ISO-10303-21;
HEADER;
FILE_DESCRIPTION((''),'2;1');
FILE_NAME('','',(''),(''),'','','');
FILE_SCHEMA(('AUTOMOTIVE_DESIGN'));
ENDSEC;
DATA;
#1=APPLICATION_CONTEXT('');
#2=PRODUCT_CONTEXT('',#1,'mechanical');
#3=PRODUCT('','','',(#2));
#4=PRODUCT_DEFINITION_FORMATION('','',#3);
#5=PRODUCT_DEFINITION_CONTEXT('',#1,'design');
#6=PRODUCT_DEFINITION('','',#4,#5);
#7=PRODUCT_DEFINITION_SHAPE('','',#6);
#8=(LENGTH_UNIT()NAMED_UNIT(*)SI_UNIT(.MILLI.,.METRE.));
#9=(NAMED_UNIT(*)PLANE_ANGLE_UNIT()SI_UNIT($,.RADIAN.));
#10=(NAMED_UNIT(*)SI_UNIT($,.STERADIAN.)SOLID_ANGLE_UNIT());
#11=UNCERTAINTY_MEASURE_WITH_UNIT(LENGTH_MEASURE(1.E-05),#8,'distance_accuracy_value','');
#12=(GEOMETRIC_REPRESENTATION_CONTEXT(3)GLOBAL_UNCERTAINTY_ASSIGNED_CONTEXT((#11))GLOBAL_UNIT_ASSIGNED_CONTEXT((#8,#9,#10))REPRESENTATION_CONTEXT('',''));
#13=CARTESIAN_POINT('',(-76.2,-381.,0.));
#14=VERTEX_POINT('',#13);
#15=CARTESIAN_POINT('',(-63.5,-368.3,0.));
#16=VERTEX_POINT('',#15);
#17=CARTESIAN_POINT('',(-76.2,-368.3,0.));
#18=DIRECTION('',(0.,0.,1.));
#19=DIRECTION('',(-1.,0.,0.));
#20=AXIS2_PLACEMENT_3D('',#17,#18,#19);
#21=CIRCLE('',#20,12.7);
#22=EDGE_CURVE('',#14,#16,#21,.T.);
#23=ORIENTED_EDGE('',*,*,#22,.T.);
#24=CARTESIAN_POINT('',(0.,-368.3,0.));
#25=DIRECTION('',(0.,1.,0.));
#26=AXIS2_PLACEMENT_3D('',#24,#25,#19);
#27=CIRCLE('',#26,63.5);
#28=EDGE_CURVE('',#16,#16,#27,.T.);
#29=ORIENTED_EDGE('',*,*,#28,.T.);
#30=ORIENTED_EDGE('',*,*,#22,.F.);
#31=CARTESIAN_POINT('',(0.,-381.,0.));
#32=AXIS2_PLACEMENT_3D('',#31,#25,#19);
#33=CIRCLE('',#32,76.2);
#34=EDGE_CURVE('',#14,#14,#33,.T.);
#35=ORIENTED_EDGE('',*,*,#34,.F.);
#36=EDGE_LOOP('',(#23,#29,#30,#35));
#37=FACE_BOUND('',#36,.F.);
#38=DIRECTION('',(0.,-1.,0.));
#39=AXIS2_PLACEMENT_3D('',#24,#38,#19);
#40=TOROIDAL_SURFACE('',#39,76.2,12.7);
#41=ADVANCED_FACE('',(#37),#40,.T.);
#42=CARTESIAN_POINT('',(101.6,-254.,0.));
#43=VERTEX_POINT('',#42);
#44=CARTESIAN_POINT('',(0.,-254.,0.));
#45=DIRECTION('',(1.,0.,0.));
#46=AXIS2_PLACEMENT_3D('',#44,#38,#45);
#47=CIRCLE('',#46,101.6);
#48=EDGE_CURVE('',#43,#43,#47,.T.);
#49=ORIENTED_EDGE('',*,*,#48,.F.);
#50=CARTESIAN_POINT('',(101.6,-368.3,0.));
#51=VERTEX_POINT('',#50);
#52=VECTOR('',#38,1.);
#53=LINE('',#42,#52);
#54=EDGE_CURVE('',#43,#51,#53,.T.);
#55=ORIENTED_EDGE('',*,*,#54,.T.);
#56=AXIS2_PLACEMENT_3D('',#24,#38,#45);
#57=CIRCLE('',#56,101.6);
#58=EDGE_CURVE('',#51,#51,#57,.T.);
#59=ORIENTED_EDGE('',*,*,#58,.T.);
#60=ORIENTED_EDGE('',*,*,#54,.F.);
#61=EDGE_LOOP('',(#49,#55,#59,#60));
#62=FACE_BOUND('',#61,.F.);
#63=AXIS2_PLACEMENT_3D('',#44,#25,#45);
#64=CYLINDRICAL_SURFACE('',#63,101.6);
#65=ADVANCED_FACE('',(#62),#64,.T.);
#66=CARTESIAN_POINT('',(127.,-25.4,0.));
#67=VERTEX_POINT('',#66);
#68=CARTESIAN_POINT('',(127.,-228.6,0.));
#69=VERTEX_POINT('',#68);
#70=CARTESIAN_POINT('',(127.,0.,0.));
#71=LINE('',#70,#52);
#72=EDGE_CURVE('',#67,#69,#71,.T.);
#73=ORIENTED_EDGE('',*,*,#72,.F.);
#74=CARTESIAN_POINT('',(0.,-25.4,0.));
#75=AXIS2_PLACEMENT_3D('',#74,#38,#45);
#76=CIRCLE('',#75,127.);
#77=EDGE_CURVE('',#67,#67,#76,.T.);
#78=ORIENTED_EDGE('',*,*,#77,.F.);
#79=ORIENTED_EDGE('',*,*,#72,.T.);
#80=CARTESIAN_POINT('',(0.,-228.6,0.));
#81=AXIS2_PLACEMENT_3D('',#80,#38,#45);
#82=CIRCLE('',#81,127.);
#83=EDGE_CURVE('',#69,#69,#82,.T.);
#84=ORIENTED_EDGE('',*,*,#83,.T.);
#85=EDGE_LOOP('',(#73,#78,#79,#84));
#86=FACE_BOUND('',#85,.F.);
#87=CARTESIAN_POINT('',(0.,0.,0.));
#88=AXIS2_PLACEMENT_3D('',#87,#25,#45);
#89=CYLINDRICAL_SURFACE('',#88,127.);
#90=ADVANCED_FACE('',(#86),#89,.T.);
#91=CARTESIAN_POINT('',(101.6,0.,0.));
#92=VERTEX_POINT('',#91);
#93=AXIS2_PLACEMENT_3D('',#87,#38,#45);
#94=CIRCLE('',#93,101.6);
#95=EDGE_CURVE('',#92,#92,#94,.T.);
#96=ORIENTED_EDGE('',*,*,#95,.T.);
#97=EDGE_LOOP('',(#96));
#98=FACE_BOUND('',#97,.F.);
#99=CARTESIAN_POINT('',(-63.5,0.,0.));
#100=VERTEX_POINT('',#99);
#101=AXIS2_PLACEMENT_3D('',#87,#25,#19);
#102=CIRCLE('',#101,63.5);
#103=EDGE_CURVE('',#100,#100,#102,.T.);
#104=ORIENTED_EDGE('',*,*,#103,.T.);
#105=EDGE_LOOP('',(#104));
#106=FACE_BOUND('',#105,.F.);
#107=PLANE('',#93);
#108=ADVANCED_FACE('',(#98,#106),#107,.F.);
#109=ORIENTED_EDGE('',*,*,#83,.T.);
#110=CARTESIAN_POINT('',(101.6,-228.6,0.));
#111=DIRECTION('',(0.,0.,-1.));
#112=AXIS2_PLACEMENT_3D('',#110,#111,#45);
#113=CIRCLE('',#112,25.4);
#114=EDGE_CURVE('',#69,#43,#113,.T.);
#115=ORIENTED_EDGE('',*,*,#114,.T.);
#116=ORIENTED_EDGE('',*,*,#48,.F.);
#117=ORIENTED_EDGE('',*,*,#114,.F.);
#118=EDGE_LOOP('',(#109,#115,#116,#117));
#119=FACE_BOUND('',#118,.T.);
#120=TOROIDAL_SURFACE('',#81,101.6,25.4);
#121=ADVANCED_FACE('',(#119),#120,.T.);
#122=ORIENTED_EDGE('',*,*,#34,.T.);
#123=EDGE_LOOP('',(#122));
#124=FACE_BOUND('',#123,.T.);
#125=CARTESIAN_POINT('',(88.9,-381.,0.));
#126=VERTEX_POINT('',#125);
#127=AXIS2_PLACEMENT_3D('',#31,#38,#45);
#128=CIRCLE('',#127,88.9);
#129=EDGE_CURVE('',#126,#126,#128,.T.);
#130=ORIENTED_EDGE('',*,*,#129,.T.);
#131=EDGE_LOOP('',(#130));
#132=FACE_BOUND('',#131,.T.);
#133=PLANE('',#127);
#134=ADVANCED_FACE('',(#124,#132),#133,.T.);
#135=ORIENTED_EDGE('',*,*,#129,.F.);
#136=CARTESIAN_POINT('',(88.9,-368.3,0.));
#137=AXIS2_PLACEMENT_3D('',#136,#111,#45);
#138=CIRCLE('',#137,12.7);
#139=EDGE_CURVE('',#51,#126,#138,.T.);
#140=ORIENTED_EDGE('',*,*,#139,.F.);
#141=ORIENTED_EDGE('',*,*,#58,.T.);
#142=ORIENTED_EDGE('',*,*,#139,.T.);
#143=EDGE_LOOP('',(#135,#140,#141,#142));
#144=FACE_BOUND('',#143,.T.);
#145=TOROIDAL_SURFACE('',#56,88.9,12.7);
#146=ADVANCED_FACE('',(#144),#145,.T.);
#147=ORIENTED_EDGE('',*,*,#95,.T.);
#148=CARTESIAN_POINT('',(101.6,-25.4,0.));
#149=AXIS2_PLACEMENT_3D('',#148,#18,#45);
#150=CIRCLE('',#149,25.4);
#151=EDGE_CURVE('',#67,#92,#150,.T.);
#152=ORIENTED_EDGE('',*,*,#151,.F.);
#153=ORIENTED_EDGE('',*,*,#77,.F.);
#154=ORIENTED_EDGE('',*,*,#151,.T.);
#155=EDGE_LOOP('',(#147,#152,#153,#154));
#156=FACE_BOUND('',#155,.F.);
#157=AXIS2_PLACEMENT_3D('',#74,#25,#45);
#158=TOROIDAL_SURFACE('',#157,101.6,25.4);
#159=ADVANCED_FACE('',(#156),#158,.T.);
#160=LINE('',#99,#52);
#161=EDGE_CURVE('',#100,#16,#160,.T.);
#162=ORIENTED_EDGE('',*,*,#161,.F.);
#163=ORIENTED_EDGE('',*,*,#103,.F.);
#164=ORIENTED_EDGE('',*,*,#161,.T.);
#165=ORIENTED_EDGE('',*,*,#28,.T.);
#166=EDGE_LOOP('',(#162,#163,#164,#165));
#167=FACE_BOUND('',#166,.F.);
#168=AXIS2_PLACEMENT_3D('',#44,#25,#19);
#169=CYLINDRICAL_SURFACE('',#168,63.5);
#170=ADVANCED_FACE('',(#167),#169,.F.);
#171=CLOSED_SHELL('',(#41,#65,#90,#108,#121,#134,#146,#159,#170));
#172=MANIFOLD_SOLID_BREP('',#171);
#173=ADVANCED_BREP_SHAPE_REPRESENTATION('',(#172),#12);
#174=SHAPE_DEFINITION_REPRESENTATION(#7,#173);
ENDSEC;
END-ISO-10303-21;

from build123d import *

# Parameters (mm, degrees)
F0_R     = 127
F1_DEPTH = 254
F2_R     = 25.4
F4_D     = 127
F5_DEPTH = 127
F6_R     = 12.7


# Not quite as in the source:
# - a feature names something its author has since deleted; it is built from what else it names


with BuildPart() as f1:
    # F0 (on Front) → F1 (new body)
    with BuildSketch(Plane.XZ):
        Circle(F0_R)
    extrude(amount=F1_DEPTH)

    # F2
    f2_edges = [f1.edges().sort_by_distance(p)[0] for p in [
        (-127, -254, 0),
        (-127, 0, 0),
    ]]
    fillet(f2_edges, radius=F2_R)

    # F4 (through all)
    with Locations(Plane.XZ.offset(254)):
        with Locations((0, 0)):
            Hole(F4_D / 2)

    # F5 (add): a face of the model
    f5_faces = [f1.faces().sort_by_distance(p)[0] for p in [
        (-98.7263180413, -254, 0),
    ]]
    extrude(f5_faces, amount=F5_DEPTH)

    # F6
    f6_edges = [f1.edges().sort_by_distance(p)[0] for p in [
        (-101.6, -381, 0),
        (-63.5, -381, 0),
    ]]
    fillet(f6_edges, radius=F6_R)


solid = f1.part
